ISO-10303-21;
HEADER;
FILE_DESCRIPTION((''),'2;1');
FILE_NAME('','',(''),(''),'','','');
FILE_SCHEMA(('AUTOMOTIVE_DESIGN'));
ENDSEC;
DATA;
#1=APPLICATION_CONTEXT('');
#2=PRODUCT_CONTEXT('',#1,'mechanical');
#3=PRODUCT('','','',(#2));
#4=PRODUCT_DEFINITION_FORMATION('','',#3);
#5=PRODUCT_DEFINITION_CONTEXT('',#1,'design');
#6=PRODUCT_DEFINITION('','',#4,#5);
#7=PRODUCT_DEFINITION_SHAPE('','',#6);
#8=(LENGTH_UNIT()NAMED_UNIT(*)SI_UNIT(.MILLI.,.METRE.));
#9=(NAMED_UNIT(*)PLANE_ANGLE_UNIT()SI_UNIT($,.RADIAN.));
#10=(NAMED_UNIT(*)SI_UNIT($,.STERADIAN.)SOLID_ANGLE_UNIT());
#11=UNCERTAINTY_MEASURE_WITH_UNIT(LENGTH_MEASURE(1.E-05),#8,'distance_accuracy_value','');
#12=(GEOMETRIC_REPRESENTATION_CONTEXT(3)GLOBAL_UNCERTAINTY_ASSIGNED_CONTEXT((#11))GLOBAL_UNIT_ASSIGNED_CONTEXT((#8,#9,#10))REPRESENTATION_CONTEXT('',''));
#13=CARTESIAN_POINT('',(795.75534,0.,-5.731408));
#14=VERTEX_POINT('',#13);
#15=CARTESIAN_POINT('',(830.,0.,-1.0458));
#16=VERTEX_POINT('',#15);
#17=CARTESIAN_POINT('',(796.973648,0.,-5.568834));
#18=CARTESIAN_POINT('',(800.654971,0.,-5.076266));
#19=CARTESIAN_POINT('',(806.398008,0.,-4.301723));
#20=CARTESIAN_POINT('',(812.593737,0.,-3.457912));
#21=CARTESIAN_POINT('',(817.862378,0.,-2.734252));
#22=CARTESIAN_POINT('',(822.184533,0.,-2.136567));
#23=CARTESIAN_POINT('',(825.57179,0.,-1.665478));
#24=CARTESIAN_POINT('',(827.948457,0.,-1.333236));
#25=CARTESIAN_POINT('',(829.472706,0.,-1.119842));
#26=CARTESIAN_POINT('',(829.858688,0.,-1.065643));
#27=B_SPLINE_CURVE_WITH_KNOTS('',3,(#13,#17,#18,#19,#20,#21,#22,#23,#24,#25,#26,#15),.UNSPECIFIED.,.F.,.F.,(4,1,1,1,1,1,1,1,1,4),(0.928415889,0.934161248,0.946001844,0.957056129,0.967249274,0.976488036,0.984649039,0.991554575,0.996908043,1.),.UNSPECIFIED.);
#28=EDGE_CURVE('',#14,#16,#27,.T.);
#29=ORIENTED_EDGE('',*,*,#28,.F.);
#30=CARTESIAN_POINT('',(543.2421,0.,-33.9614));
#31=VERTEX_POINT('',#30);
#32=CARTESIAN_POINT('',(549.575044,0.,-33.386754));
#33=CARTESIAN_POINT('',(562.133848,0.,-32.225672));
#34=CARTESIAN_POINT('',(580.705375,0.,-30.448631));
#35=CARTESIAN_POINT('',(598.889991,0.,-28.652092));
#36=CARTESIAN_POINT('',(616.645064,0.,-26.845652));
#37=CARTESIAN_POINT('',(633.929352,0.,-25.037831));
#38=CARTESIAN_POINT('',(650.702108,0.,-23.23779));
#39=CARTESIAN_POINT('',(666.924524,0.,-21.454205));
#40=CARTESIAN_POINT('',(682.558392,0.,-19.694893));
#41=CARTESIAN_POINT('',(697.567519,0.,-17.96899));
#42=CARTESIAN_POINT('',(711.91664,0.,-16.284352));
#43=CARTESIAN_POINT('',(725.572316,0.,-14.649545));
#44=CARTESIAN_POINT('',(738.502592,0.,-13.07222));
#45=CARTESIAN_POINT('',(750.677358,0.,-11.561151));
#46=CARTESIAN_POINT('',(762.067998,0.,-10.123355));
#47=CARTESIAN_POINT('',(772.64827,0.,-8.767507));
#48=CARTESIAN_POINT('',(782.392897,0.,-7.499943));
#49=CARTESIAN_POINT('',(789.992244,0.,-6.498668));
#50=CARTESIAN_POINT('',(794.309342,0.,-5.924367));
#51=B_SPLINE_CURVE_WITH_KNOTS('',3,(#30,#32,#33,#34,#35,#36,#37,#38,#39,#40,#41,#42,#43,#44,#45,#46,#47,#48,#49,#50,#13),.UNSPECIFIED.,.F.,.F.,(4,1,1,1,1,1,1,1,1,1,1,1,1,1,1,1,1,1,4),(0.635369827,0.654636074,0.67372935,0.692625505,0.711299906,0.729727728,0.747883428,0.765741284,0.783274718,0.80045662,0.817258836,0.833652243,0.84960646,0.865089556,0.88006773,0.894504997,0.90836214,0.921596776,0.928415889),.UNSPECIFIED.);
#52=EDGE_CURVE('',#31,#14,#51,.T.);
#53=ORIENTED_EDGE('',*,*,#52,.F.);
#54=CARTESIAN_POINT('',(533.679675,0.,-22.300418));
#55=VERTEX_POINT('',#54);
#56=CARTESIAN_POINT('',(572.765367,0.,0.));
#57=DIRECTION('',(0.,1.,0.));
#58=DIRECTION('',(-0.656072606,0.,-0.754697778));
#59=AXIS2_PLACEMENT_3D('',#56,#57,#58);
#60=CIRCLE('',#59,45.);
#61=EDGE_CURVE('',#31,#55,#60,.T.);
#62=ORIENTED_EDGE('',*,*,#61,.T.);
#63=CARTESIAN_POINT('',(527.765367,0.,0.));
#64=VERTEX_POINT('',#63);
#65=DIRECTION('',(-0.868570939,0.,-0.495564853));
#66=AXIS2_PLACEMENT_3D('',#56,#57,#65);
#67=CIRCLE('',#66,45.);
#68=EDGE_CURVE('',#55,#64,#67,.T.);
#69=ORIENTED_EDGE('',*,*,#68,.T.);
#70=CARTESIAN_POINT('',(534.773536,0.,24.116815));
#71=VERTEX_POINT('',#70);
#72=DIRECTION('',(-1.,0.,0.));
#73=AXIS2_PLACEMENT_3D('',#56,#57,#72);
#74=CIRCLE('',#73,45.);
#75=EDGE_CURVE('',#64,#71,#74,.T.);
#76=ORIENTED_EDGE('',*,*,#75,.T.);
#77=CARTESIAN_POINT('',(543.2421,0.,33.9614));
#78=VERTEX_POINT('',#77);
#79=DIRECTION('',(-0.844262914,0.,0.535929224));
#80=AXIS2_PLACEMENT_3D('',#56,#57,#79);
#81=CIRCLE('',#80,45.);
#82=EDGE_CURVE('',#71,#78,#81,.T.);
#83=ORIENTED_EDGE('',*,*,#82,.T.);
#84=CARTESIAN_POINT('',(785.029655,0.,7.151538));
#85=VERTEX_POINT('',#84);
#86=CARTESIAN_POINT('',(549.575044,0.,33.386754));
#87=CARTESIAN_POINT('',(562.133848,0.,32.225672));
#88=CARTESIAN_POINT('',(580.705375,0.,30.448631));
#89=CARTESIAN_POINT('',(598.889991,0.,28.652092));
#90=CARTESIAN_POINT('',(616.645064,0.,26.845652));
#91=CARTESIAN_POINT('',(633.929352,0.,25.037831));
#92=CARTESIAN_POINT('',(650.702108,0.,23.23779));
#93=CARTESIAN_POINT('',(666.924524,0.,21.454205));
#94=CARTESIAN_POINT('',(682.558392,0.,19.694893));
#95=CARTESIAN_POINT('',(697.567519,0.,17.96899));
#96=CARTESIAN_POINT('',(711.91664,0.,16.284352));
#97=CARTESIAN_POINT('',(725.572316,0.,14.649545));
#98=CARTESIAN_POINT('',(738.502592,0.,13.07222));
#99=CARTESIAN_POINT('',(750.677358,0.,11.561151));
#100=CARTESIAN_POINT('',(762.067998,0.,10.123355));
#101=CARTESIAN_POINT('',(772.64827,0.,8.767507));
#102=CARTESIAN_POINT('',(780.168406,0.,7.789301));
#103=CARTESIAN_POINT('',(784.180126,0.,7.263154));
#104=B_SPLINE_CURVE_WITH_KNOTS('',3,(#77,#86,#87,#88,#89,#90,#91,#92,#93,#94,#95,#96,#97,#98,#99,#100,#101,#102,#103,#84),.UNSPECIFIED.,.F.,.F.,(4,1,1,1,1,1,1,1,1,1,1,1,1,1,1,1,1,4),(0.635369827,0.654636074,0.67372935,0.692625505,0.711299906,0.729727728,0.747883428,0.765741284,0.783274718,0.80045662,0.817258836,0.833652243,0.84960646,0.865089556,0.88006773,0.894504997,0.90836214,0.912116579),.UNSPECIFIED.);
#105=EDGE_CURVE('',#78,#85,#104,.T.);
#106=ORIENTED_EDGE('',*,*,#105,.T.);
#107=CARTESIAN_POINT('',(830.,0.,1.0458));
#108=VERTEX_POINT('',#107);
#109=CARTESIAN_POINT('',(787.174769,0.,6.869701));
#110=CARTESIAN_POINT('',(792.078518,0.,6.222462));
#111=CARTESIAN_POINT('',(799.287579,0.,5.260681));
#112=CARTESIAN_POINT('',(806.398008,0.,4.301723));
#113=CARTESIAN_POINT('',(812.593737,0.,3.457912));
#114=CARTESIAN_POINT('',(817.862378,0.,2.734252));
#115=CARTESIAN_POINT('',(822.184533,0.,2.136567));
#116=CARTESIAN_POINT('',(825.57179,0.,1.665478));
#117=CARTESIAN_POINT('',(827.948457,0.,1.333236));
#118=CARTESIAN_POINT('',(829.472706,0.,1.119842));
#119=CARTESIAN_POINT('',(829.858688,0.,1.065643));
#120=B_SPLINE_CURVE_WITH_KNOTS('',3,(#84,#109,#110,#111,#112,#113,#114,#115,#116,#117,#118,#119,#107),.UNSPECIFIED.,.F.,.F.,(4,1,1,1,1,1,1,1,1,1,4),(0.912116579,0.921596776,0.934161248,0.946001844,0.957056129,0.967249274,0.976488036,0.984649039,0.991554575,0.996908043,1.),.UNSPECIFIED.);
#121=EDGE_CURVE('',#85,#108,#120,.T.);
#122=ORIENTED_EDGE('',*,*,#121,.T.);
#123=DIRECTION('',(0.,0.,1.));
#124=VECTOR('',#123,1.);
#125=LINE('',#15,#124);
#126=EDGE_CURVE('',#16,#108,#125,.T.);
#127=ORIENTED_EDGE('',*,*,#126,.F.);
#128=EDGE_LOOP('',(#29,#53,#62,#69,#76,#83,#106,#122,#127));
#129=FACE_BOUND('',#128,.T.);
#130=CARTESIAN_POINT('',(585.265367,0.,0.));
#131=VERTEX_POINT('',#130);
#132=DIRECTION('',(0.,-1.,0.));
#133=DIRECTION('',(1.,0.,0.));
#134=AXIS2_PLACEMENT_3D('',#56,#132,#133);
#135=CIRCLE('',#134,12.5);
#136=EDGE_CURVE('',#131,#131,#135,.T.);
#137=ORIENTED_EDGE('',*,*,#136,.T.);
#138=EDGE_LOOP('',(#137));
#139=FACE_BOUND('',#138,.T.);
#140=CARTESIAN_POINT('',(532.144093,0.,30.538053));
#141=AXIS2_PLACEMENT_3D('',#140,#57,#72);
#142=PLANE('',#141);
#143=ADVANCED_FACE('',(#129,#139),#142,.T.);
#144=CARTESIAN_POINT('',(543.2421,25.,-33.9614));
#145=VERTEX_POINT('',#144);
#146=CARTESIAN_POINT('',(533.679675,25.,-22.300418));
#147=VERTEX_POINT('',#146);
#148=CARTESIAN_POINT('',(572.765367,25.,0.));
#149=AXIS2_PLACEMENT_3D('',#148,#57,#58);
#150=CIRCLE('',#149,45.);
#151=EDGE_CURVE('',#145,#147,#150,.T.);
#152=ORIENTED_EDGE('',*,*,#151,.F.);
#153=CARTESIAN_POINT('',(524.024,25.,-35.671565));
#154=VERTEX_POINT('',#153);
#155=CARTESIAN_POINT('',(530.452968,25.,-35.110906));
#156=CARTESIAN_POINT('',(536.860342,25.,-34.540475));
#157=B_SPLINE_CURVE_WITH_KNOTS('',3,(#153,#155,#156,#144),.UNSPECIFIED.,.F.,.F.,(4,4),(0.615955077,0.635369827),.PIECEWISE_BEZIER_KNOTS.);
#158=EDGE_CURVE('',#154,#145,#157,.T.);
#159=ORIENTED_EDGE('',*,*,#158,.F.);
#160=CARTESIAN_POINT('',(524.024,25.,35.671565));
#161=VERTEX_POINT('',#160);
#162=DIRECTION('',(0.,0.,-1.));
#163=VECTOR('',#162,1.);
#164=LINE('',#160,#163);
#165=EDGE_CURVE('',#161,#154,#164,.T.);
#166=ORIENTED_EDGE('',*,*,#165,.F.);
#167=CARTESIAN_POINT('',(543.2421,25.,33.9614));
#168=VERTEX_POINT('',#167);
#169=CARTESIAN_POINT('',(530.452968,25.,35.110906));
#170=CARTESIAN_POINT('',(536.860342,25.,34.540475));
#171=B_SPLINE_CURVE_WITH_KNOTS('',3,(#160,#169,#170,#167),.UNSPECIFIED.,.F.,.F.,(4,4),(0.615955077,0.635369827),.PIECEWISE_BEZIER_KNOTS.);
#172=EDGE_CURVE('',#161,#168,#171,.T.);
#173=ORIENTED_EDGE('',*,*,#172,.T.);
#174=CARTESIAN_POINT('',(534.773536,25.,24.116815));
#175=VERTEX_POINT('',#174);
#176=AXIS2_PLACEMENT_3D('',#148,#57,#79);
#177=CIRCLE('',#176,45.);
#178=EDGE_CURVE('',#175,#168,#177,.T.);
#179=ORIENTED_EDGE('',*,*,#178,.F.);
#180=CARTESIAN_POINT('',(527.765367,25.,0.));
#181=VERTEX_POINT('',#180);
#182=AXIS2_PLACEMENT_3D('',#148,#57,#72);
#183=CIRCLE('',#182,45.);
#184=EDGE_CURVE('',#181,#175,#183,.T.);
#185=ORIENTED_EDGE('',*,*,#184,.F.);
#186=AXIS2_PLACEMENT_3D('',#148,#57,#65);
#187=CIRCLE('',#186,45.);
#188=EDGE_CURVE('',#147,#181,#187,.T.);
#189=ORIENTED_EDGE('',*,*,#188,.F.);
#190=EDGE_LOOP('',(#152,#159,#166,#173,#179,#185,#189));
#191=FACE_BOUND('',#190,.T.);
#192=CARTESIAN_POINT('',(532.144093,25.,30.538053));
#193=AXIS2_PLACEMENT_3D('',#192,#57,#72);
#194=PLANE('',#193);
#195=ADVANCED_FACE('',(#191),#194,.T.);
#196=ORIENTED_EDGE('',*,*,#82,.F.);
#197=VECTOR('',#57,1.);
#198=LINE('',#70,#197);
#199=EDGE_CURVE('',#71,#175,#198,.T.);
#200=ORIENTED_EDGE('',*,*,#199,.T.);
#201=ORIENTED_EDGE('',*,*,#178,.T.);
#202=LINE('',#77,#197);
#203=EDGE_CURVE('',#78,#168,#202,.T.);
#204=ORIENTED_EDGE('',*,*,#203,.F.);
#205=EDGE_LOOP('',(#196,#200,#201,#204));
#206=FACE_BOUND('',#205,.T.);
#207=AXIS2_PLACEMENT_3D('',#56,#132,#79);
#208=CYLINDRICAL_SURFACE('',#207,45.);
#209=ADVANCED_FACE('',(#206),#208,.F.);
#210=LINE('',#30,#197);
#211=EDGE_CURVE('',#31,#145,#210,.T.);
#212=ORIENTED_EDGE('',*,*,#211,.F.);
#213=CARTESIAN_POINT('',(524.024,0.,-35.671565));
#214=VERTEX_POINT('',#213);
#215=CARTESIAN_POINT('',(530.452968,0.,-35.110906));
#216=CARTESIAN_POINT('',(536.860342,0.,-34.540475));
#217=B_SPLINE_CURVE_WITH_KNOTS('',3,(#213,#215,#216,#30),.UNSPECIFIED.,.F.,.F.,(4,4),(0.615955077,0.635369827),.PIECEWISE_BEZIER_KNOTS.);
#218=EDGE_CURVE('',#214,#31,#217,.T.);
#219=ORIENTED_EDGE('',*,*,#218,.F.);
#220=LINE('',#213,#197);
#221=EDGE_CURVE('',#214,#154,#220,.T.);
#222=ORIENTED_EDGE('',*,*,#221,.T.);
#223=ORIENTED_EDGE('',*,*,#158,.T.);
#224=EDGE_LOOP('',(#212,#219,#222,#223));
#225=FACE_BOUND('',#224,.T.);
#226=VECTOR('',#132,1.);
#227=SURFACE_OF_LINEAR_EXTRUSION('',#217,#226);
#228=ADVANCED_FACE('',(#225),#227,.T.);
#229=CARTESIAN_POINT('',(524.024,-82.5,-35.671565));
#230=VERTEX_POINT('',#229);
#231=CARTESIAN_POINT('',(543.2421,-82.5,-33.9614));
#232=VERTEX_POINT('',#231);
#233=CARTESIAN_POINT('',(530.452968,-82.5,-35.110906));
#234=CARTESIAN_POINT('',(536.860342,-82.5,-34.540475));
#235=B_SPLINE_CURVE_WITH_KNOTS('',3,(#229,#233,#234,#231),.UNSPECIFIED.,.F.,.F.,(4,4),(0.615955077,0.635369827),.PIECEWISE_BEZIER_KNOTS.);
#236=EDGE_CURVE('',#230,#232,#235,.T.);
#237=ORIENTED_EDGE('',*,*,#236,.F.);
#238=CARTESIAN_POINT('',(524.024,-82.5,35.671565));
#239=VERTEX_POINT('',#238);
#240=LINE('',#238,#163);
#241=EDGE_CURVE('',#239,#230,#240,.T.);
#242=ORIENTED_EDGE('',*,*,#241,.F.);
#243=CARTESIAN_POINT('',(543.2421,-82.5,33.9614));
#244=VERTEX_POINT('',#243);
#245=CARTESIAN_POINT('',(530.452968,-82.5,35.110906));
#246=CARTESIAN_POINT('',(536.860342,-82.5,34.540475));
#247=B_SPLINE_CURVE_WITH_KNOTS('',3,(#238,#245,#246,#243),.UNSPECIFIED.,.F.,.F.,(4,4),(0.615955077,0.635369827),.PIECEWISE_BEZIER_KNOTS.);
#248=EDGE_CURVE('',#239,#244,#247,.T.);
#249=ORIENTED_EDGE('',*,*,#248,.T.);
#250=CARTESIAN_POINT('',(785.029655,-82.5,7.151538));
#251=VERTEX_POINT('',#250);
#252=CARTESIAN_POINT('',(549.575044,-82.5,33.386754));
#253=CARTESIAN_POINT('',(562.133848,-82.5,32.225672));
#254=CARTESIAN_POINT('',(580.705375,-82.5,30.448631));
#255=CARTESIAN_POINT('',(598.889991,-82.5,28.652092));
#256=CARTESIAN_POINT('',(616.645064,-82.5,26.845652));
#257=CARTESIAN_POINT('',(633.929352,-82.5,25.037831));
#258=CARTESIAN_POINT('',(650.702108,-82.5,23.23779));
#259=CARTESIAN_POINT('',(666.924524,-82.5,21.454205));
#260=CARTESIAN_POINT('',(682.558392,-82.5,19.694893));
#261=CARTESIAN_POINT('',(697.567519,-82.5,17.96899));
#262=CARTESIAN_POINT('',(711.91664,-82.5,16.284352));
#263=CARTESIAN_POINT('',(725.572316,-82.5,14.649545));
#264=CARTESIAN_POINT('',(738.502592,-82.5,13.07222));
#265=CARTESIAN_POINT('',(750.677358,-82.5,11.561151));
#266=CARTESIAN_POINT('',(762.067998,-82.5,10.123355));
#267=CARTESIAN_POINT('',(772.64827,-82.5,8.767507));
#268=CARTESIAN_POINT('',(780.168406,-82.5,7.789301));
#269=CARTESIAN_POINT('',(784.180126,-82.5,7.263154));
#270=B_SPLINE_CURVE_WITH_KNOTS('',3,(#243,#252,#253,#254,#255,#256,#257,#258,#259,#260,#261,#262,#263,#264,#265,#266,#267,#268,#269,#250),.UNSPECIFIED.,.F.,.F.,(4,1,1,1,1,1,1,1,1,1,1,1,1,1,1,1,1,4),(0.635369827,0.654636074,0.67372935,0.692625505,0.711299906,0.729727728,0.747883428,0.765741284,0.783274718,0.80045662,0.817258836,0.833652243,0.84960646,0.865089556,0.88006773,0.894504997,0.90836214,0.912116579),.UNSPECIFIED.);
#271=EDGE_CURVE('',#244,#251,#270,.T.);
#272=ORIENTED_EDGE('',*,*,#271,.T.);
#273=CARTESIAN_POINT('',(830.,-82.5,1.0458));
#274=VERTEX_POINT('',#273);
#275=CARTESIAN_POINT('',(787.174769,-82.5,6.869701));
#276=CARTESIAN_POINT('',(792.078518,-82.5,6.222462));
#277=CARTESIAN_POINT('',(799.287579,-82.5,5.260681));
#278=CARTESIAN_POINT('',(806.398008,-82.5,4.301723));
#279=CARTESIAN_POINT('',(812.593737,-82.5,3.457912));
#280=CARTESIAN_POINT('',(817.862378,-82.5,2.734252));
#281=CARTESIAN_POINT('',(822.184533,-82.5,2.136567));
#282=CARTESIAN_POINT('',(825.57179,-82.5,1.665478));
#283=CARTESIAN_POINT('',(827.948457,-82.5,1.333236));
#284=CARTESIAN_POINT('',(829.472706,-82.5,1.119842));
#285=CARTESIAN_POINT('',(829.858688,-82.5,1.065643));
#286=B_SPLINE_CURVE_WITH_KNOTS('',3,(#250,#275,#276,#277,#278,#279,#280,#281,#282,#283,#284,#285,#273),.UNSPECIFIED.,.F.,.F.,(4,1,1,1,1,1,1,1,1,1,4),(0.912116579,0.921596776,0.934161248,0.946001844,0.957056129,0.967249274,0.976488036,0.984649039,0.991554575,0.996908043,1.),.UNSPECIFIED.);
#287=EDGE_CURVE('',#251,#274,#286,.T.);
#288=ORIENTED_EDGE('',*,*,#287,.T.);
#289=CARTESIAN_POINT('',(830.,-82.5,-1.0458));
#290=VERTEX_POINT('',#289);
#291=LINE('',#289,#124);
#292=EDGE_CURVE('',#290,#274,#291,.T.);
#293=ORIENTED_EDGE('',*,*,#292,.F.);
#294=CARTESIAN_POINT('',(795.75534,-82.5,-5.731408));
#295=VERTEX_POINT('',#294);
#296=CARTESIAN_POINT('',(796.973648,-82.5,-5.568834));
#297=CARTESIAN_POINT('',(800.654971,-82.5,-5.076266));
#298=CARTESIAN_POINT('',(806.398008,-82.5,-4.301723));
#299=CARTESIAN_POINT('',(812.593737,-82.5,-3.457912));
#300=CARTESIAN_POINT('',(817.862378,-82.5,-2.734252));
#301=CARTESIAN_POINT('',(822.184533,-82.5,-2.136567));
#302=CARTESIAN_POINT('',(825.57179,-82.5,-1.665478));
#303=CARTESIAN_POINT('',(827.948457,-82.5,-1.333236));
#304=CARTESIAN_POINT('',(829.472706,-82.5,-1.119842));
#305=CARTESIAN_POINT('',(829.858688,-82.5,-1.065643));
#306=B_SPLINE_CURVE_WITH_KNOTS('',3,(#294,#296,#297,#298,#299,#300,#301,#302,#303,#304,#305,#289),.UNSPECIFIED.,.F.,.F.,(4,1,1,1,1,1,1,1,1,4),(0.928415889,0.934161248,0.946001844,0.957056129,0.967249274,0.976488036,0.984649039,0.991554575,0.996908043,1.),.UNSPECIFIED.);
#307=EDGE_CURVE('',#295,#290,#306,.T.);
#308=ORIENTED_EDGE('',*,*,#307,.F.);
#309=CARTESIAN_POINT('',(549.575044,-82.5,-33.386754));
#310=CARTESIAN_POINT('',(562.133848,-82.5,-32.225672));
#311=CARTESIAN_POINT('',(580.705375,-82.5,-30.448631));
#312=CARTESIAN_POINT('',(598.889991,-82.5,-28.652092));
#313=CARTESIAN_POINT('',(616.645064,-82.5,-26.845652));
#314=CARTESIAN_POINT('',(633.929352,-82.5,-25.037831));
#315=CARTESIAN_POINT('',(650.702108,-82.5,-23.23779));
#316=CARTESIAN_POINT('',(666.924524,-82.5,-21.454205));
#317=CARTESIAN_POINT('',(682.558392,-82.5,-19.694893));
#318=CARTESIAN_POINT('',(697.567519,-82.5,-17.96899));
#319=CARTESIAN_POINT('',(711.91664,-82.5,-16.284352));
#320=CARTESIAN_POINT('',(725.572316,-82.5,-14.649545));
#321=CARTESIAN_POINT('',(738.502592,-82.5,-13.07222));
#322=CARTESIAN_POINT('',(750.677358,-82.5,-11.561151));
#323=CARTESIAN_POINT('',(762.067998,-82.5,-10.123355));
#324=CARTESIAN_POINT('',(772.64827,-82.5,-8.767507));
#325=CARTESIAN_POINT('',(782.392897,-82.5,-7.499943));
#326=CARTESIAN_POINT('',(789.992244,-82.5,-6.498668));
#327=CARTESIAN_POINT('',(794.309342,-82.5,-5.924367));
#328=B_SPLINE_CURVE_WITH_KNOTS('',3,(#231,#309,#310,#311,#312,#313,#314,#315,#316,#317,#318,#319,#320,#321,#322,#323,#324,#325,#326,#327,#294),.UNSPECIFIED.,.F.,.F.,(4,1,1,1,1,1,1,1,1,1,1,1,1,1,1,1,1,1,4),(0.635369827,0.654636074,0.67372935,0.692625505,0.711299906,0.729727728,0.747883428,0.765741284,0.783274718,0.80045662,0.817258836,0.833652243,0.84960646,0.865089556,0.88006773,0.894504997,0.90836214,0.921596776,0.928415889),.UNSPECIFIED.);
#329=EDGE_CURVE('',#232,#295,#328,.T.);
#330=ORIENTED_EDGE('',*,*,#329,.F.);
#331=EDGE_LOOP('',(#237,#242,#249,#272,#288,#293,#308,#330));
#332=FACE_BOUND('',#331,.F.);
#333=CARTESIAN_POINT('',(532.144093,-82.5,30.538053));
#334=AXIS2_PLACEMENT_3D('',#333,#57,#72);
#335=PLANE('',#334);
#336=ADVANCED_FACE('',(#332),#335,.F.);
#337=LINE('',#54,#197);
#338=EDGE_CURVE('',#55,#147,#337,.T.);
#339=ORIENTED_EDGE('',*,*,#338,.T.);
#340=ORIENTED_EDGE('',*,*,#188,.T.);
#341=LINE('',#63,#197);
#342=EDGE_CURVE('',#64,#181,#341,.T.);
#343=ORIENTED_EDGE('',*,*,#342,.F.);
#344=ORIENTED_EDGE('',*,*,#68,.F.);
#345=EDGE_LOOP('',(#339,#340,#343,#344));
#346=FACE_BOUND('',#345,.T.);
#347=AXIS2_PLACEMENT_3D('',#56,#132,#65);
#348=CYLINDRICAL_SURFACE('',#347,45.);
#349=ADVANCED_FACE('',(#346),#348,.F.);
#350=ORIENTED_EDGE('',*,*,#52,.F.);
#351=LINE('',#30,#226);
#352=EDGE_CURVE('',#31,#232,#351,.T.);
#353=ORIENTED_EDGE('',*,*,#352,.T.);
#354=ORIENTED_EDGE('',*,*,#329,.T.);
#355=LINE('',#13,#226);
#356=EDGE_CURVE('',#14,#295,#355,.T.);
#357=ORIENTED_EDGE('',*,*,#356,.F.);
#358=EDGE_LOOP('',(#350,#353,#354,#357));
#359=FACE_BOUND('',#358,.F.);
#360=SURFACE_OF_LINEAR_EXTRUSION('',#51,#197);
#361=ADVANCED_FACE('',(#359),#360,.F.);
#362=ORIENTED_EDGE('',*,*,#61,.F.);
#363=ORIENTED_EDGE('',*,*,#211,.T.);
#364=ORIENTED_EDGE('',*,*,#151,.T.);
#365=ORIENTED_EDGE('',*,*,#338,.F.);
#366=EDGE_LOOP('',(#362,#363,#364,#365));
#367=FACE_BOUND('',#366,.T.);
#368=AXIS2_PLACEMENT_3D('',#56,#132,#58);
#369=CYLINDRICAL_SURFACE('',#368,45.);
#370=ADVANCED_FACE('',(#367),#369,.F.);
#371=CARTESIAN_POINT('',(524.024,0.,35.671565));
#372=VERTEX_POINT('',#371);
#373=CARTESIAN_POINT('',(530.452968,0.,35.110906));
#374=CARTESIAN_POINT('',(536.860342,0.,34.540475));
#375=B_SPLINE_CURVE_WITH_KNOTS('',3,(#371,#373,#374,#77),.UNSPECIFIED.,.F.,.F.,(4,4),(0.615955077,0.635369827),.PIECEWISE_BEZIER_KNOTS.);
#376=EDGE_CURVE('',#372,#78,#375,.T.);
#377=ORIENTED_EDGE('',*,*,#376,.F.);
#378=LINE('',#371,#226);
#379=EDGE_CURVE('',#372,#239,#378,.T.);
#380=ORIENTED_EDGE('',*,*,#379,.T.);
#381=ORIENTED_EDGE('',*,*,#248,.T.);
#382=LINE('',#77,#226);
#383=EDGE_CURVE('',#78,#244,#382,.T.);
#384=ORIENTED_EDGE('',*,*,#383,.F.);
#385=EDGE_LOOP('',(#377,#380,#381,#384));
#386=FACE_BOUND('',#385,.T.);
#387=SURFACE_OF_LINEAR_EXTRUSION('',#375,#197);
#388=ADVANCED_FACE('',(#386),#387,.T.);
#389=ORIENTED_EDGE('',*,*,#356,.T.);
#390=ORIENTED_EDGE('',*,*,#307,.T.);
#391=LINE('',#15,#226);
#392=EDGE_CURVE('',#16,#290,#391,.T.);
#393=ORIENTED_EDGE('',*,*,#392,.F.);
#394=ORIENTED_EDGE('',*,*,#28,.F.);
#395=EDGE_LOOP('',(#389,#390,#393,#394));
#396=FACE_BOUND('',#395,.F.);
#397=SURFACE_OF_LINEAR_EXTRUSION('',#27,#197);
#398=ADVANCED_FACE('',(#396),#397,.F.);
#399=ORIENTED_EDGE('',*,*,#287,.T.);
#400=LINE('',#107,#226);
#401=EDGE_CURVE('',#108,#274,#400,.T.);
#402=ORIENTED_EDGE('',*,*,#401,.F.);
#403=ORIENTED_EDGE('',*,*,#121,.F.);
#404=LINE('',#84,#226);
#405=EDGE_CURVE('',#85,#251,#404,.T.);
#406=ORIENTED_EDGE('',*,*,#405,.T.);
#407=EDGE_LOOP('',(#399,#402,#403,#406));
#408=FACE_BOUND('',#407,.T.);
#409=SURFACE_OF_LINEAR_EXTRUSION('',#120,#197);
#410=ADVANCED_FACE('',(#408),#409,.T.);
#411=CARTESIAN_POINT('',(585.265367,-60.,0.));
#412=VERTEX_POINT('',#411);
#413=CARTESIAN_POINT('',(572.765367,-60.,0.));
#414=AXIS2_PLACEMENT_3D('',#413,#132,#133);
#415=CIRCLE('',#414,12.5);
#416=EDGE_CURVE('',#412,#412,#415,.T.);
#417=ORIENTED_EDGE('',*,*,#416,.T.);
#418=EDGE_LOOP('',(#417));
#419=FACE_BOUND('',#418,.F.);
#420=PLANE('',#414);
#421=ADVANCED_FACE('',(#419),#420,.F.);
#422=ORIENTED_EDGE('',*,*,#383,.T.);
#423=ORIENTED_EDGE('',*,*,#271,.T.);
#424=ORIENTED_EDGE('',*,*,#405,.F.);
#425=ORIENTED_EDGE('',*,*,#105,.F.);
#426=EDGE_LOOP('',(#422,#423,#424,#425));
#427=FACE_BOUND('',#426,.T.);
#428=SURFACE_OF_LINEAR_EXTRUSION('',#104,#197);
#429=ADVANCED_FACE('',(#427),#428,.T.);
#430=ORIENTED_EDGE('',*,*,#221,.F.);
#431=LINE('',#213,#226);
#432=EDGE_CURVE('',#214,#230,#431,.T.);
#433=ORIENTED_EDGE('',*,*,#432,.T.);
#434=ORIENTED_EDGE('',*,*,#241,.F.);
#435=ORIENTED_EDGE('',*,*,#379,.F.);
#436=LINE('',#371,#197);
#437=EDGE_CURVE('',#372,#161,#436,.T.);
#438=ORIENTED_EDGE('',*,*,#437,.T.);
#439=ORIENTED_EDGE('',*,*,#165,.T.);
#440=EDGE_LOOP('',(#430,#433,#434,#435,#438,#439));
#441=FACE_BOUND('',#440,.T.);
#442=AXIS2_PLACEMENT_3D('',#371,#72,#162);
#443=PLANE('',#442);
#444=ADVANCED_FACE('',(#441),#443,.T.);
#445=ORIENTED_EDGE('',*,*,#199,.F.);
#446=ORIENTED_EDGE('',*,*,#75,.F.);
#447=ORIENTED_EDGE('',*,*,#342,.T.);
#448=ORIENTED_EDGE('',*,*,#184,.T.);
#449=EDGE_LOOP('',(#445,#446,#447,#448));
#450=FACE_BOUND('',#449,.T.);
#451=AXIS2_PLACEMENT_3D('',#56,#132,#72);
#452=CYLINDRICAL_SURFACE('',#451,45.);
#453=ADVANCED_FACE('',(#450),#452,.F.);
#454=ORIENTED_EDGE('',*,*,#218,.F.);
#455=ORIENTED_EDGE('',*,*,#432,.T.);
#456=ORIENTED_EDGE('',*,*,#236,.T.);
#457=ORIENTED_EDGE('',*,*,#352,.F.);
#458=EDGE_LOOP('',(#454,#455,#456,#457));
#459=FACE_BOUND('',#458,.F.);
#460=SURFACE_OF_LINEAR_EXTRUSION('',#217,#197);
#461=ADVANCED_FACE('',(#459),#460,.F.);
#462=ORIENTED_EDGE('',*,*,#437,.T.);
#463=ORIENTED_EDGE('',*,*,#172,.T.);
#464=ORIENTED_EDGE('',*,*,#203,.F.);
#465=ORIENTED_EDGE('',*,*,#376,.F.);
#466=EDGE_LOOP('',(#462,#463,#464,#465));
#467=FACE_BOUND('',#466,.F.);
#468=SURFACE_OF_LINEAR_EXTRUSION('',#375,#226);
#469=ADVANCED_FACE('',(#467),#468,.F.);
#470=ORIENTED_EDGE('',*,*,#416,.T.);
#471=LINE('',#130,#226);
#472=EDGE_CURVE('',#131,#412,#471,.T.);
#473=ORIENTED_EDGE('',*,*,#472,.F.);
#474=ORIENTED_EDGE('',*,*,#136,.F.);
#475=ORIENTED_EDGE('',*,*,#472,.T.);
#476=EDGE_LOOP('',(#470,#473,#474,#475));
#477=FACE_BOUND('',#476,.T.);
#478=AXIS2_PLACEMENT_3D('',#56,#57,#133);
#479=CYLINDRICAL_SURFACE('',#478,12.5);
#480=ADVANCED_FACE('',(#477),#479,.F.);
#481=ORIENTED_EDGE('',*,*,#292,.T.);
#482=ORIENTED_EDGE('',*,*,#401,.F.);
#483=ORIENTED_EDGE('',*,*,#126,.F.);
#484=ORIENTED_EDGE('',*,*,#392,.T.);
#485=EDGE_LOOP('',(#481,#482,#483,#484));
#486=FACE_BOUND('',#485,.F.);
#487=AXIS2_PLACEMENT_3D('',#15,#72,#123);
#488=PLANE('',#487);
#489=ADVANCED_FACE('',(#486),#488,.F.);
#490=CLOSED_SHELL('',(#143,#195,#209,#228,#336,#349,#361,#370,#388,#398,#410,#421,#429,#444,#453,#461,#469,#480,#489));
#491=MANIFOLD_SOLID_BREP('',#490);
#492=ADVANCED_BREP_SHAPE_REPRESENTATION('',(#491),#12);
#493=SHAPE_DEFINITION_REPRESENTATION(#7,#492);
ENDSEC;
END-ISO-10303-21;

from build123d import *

# Parameters (mm, degrees)
F1_DEPTH = 82.5
F2_DEPTH = 25
F3_R     = 12.5
F4_DEPTH = 60


with BuildPart() as f1:
    # F0 (on Front) → F1 (new body)
    with BuildSketch(Plane.XZ):
        with BuildLine():
            add(Edge.make_bspline(
                [(524.024, 35.6715651167), (530.4529675183, 35.1109062879), (536.8603422789, 34.540475321), (543.2421, 33.9614)],
                knots=[0.6159550767, 0.6159550767, 0.6159550767, 0.6159550767, 0.635369827, 0.635369827, 0.635369827, 0.635369827], degree=3))
            Line((524.024, 35.6715651167), (524.024, 25.1107127602))
            add(Edge.make_bspline(
                [(524.024, 25.1107127602), (526.6770638269, 24.868020166), (530.2603237936, 24.5375720807), (533.8432643328, 24.2037227591), (534.7735361573, 24.1168150682)],
                knots=[513.3651484855, 513.3651484855, 513.3651484855, 513.3651484855, 521.3575419642, 524.1605032173, 524.1605032173, 524.1605032173, 524.1605032173], degree=3))
            ThreePointArc((534.7735361573, 24.1168150682), (538.650838246, 29.3461907199), (543.2421, 33.9614))
        make_face()
        with BuildLine():
            Line((524.024, -23.2286070743), (524.024, -35.6715651167))
            add(Edge.make_bspline(
                [(524.024, -35.6715651167), (530.4529675183, -35.1109062879), (536.8603422789, -34.540475321), (543.2421, -33.9614)],
                knots=[0.6159550767, 0.6159550767, 0.6159550767, 0.6159550767, 0.635369827, 0.635369827, 0.635369827, 0.635369827], degree=3))
            ThreePointArc((543.2421, -33.9614), (537.9689313182, -28.5343309954), (533.6796750092, -22.3004184004))
            add(Edge.make_bspline(
                [(524.024, -23.2286070743), (526.7063477836, -22.9731340758), (529.9249490386, -22.6641634275), (533.1432820941, -22.3524476401), (533.6796750092, -22.3004184004)],
                knots=[513.2741132252, 513.2741132252, 513.2741132252, 513.2741132252, 521.3575419641, 522.9742691651, 522.9742691651, 522.9742691651, 522.9742691651], degree=3))
        make_face()
        with BuildLine():
            add(Edge.make_bspline(
                [(524.024, 25.1107127602), (526.6770638269, 24.868020166), (530.2603237936, 24.5375720807), (533.8432643328, 24.2037227591), (534.7735361573, 24.1168150682)],
                knots=[513.3651484855, 513.3651484855, 513.3651484855, 513.3651484855, 521.3575419642, 524.1605032173, 524.1605032173, 524.1605032173, 524.1605032173], degree=3))
            Line((524.024, 25.1107127602), (524.024, 0))
            Line((524.024, 0), (527.7653672657, 0))
            ThreePointArc((527.7653672657, 0), (529.5529130431, 12.5572210326), (534.7735361573, 24.1168150682))
        make_face()
        with BuildLine():
            Line((524.024, 0), (524.024, -23.2286070743))
            add(Edge.make_bspline(
                [(524.024, -23.2286070743), (526.7063477836, -22.9731340758), (529.9249490386, -22.6641634275), (533.1432820941, -22.3524476401), (533.6796750092, -22.3004184004)],
                knots=[513.2741132252, 513.2741132252, 513.2741132252, 513.2741132252, 521.3575419641, 522.9742691651, 522.9742691651, 522.9742691651, 522.9742691651], degree=3))
            ThreePointArc((533.6796750092, -22.3004184004), (529.2690677016, -11.535680484), (527.7653672657, 0))
            Line((527.7653672657, 0), (524.024, 0))
        make_face()
        with BuildLine():
            add(Edge.make_bspline(
                [(543.2421, 33.9614), (549.5750436875, 33.3867540232), (562.1338476881, 32.225672374), (580.7053749717, 30.4486309004), (598.8899905971, 28.6520916952), (616.645063933, 26.8456524154), (633.9293517992, 25.0378311486), (650.7021084927, 23.2377895738), (666.924523511, 21.4542053534), (682.5583919944, 19.6948931431), (697.5675188661, 17.9689901739), (711.9166403588, 16.2843520174), (725.5723159977, 14.6495448382), (738.5025922877, 13.0722198932), (750.6773575973, 11.5611505206), (762.0679980169, 10.123355488), (772.6482697775, 8.767506964), (780.1684058461, 7.7893010713), (784.1801262556, 7.2631536294), (785.0296548206, 7.1515377434)],
                knots=[0.635369827, 0.635369827, 0.635369827, 0.635369827, 0.654636074, 0.6737293504, 0.6926255053, 0.7112999065, 0.7297277282, 0.747883428, 0.7657412837, 0.7832747177, 0.8004566202, 0.8172588362, 0.8336522425, 0.8496064603, 0.8650895564, 0.8800677295, 0.8945049966, 0.9083621399, 0.9121165786, 0.9121165786, 0.9121165786, 0.9121165786], degree=3))
            ThreePointArc((543.2421, 33.9614), (538.650838246, 29.3461907199), (534.7735361573, 24.1168150682))
            add(Edge.make_bspline(
                [(534.7735361573, 24.1168150682), (547.4888491387, 22.9289273345), (570.2810474133, 20.7234876988), (602.9514797769, 17.4132456465), (629.5721727855, 14.5753690345), (646.1150179567, 12.7470797563), (652.7777391491, 12)],
                knots=[524.1605032173, 524.1605032173, 524.1605032173, 524.1605032173, 562.4724553443, 592.8561025481, 622.6732889332, 642.7866986571, 642.7866986571, 642.7866986571, 642.7866986571], degree=3))
            Line((652.7777391491, 12), (665.973, 12))
            ThreePointArc((665.973, 12), (669.6925428199, 11.4089877382), (673.0457030707, 9.6941668684))
            add(Edge.make_bspline(
                [(673.0457030707, 9.6941668684), (678.6430527256, 9.0482316549), (693.2761814168, 7.3399638663), (715.1021603081, 4.7178028299), (732.4511827497, 2.5525104658), (740.7700852943, 1.4970109313), (741.8962423005, 1.3538186415)],
                knots=[663.1854009899, 663.1854009899, 663.1854009899, 663.1854009899, 680.0888797975, 707.3828314911, 729.1339381861, 732.5396092821, 732.5396092821, 732.5396092821, 732.5396092821], degree=3))
            add(Edge.make_bspline(
                [(741.8962423005, 1.3538186415), (746.2843670673, 1.9285048035), (754.6747553371, 3.0362373869), (766.9194584147, 4.6744667559), (776.9091256945, 6.0324501077), (782.8966080674, 6.8566568424), (785.0296548206, 7.1515377434)],
                knots=[732.5396092819, 732.5396092819, 732.5396092819, 732.5396092819, 745.8163943039, 757.9291810967, 769.6010098164, 776.0610078587, 776.0610078587, 776.0610078587, 776.0610078587], degree=3))
        make_face()
        with BuildLine():
            ThreePointArc((533.6796750092, -22.3004184004), (537.9689313182, -28.5343309954), (543.2421, -33.9614))
            add(Edge.make_bspline(
                [(543.2421, -33.9614), (549.5750436875, -33.3867540232), (562.1338476881, -32.225672374), (580.7053749717, -30.4486309004), (598.8899905971, -28.6520916952), (616.645063933, -26.8456524154), (633.9293517992, -25.0378311486), (650.7021084927, -23.2377895738), (666.924523511, -21.4542053534), (682.5583919944, -19.6948931431), (697.5675188661, -17.9689901739), (711.9166403588, -16.2843520174), (725.5723159977, -14.6495448382), (738.5025922877, -13.0722198932), (750.6773575973, -11.5611505206), (762.0679980169, -10.123355488), (772.6482697775, -8.767506964), (782.3928967751, -7.4999432572), (789.9922436278, -6.4986676858), (794.3093421293, -5.9243671687), (795.7553403022, -5.731408495)],
                knots=[0.635369827, 0.635369827, 0.635369827, 0.635369827, 0.654636074, 0.6737293504, 0.6926255053, 0.7112999065, 0.7297277282, 0.747883428, 0.7657412837, 0.7832747177, 0.8004566202, 0.8172588362, 0.8336522425, 0.8496064603, 0.8650895564, 0.8800677295, 0.8945049966, 0.9083621399, 0.921596776, 0.9284158886, 0.9284158886, 0.9284158886, 0.9284158886], degree=3))
            add(Edge.make_bspline(
                [(752.4752127939, 0), (753.3385987131, -0.1111737387), (758.2064040588, -0.7388852768), (766.9317355754, -1.8729638235), (778.4845581837, -3.3993366737), (788.0433504555, -4.682906586), (793.7449819172, -5.4572465403), (795.7553403022, -5.731408495)],
                knots=[743.2048524915, 743.2048524915, 743.2048524915, 743.2048524915, 745.816394304, 757.9291810969, 769.6010098166, 780.7760242539, 786.8629233002, 786.8629233002, 786.8629233002, 786.8629233002], degree=3))
            Line((752.4752127939, 0), (731.4902537549, 0))
            add(Edge.make_bspline(
                [(675.7749550869, -6.922548409), (680.4704196169, -6.3608211123), (694.1976504575, -4.7032327955), (712.7702276209, -2.4012449385), (726.6428498764, -0.6263462539), (731.4902537549, 0)],
                knots=[665.902054437, 665.902054437, 665.902054437, 665.902054437, 680.0888797974, 707.382831491, 722.0459285975, 722.0459285975, 722.0459285975, 722.0459285975], degree=3))
            ThreePointArc((675.7749550869, -6.922548409), (671.4924845363, -10.6552940107), (665.973, -12))
            Line((665.973, -12), (632.0462382215, -12))
            add(Edge.make_bspline(
                [(579.5327593007, -17.6845550908), (587.4225464727, -16.8640224682), (604.9318542045, -15.0134548613), (622.4325289508, -13.08262656), (632.0462382215, -12)],
                knots=[569.0591158558, 569.0591158558, 569.0591158558, 569.0591158558, 592.856102548, 621.8794937898, 621.8794937898, 621.8794937898, 621.8794937898], degree=3))
            add(Edge.make_bspline(
                [(569.024, -20), (574.601223494, -20), (579.5327593007, -17.6845550908)],
                knots=[4.7123889804, 4.7123889804, 4.7123889804, 5.1983473252, 5.1983473252, 5.1983473252], degree=2, weights=[1, 0.9706255083, 1]))
            add(Edge.make_bspline(
                [(563.3375761456, -19.3507371729), (566.1338768344, -20), (569.024, -20)],
                knots=[4.4568882152, 4.4568882152, 4.4568882152, 4.7123889804, 4.7123889804, 4.7123889804], degree=2, weights=[1, 0.9918510117, 1]))
            add(Edge.make_bspline(
                [(533.6796750092, -22.3004184004), (543.5680241797, -21.3412646258), (553.4538623678, -20.3564530629), (563.3375761456, -19.3507371729)],
                knots=[522.9742691651, 522.9742691651, 522.9742691651, 522.9742691651, 552.7784716909, 552.7784716909, 552.7784716909, 552.7784716909], degree=3))
        make_face()
        with BuildLine():
            add(Edge.make_bspline(
                [(534.7735361573, 24.1168150682), (547.4888491387, 22.9289273345), (570.2810474133, 20.7234876988), (602.9514797769, 17.4132456465), (629.5721727855, 14.5753690345), (646.1150179567, 12.7470797563), (652.7777391491, 12)],
                knots=[524.1605032173, 524.1605032173, 524.1605032173, 524.1605032173, 562.4724553443, 592.8561025481, 622.6732889332, 642.7866986571, 642.7866986571, 642.7866986571, 642.7866986571], degree=3))
            ThreePointArc((534.7735361573, 24.1168150682), (529.5529130431, 12.5572210326), (527.7653672657, 0))
            Line((527.7653672657, 0), (546.524, 0))
            add(Edge.make_bspline(
                [(591.524, 0), (591.524, 20), (569.024, 20), (546.524, 20), (546.524, 0)],
                knots=[0, 0, 0, 1.5707963268, 1.5707963268, 3.1415926536, 3.1415926536, 3.1415926536], degree=2, weights=[1, 0.7071067812, 1, 0.7071067812, 1]))
            Line((591.524, 0), (623.973, 0))
            Line((623.973, 0), (623.973, 10))
            ThreePointArc((623.973, 10), (624.5587864376, 11.4142135624), (625.973, 12))
            Line((625.973, 12), (652.7777391491, 12))
        make_face()
        with BuildLine():
            ThreePointArc((527.7653672657, 0), (529.2690677016, -11.535680484), (533.6796750092, -22.3004184004))
            add(Edge.make_bspline(
                [(533.6796750092, -22.3004184004), (543.5680241797, -21.3412646258), (553.4538623678, -20.3564530629), (563.3375761456, -19.3507371729)],
                knots=[522.9742691651, 522.9742691651, 522.9742691651, 522.9742691651, 552.7784716909, 552.7784716909, 552.7784716909, 552.7784716909], degree=3))
            add(Edge.make_bspline(
                [(546.524, 0), (546.524, -15.4468544374), (563.3375761456, -19.3507371729)],
                knots=[3.1415926536, 3.1415926536, 3.1415926536, 4.4568882152, 4.4568882152, 4.4568882152], degree=2, weights=[1, 0.7914322299, 1]))
            Line((546.524, 0), (527.7653672657, 0))
        make_face()
        with BuildLine():
            add(Edge.make_bspline(
                [(785.0296548206, 7.1515377434), (787.174768668, 6.8697005072), (792.0785180819, 6.2224623401), (799.2875794028, 5.2606805783), (806.398007937, 4.3017234095), (812.5937368846, 3.4579115596), (817.8623783077, 2.7342517017), (822.1845332462, 2.1365671069), (825.5717903187, 1.6654782983), (827.9484571682, 1.33323589), (829.4727060537, 1.1198422864), (829.8586880275, 1.0656429389), (830, 1.0458)],
                knots=[0.9121165786, 0.9121165786, 0.9121165786, 0.9121165786, 0.921596776, 0.9341612481, 0.9460018444, 0.9570561288, 0.9672492741, 0.9764880356, 0.9846490394, 0.9915545746, 0.9969080429, 1, 1, 1, 1], degree=3))
            add(Edge.make_bspline(
                [(741.8962423005, 1.3538186415), (746.2843670673, 1.9285048035), (754.6747553371, 3.0362373869), (766.9194584147, 4.6744667559), (776.9091256945, 6.0324501077), (782.8966080674, 6.8566568424), (785.0296548206, 7.1515377434)],
                knots=[732.5396092819, 732.5396092819, 732.5396092819, 732.5396092819, 745.8163943039, 757.9291810967, 769.6010098164, 776.0610078587, 776.0610078587, 776.0610078587, 776.0610078587], degree=3))
            add(Edge.make_bspline(
                [(741.8962423005, 1.3538186415), (745.4229300003, 0.9053958333), (748.9492417496, 0.4540210524), (752.4752127939, 0)],
                knots=[732.5396092821, 732.5396092821, 732.5396092821, 732.5396092821, 743.2048524915, 743.2048524915, 743.2048524915, 743.2048524915], degree=3))
            Line((752.4752127939, 0), (830, 0))
            Line((830, 0), (830, 1.0458))
        make_face()
        with BuildLine():
            add(Edge.make_bspline(
                [(752.4752127939, 0), (753.3385987131, -0.1111737387), (758.2064040588, -0.7388852768), (766.9317355754, -1.8729638235), (778.4845581837, -3.3993366737), (788.0433504555, -4.682906586), (793.7449819172, -5.4572465403), (795.7553403022, -5.731408495)],
                knots=[743.2048524915, 743.2048524915, 743.2048524915, 743.2048524915, 745.816394304, 757.9291810969, 769.6010098166, 780.7760242539, 786.8629233002, 786.8629233002, 786.8629233002, 786.8629233002], degree=3))
            add(Edge.make_bspline(
                [(795.7553403022, -5.731408495), (796.9736482838, -5.568833537), (800.6549707765, -5.0762655667), (806.398007937, -4.3017234095), (812.5937368846, -3.4579115596), (817.8623783077, -2.7342517017), (822.1845332462, -2.1365671069), (825.5717903187, -1.6654782983), (827.9484571682, -1.33323589), (829.4727060537, -1.1198422864), (829.8586880275, -1.0656429389), (830, -1.0458)],
                knots=[0.9284158886, 0.9284158886, 0.9284158886, 0.9284158886, 0.9341612481, 0.9460018444, 0.9570561288, 0.9672492741, 0.9764880356, 0.9846490394, 0.9915545746, 0.9969080429, 1, 1, 1, 1], degree=3))
            Line((830, -1.0458), (830, 0))
            Line((830, 0), (752.4752127939, 0))
        make_face()
        with BuildLine():
            Line((665.973, 12), (652.7777391491, 12))
            add(Edge.make_bspline(
                [(652.7777391491, 12), (655.762922623, 11.6652763822), (660.161514663, 11.1688961032), (664.5595773708, 10.6678568096), (665.973, 10.5063520034)],
                knots=[642.7866986571, 642.7866986571, 642.7866986571, 642.7866986571, 651.7983646979, 656.0662217526, 656.0662217526, 656.0662217526, 656.0662217526], degree=3))
            Line((665.973, 10.5063520034), (665.973, 12))
        make_face()
        with BuildLine():
            add(Edge.make_bspline(
                [(652.7777391491, 12), (655.762922623, 11.6652763822), (660.161514663, 11.1688961032), (664.5595773708, 10.6678568096), (665.973, 10.5063520034)],
                knots=[642.7866986571, 642.7866986571, 642.7866986571, 642.7866986571, 651.7983646979, 656.0662217526, 656.0662217526, 656.0662217526, 656.0662217526], degree=3))
            Line((652.7777391491, 12), (625.973, 12))
            ThreePointArc((625.973, 12), (624.5587864376, 11.4142135624), (623.973, 10))
            Line((623.973, 10), (623.973, 0))
            Line((623.973, 0), (665.973, 0))
            Line((665.973, 0), (665.973, 10.5063520034))
        make_face()
        with BuildLine():
            add(Edge.make_bspline(
                [(546.524, 0), (546.524, -15.4468544374), (563.3375761456, -19.3507371729)],
                knots=[3.1415926536, 3.1415926536, 3.1415926536, 4.4568882152, 4.4568882152, 4.4568882152], degree=2, weights=[1, 0.7914322299, 1]))
            add(Edge.make_bspline(
                [(563.3375761456, -19.3507371729), (566.5523093603, -19.0236224518), (571.9509432397, -18.4705327095), (577.3489807289, -17.911666611), (579.5327593007, -17.6845550908)],
                knots=[552.7784716909, 552.7784716909, 552.7784716909, 552.7784716909, 562.4724553442, 569.0591158558, 569.0591158558, 569.0591158558, 569.0591158558], degree=3))
            add(Edge.make_bspline(
                [(579.5327593007, -17.6845550908), (591.524, -12.0544515447), (591.524, 0)],
                knots=[5.1983473252, 5.1983473252, 5.1983473252, 6.2831853072, 6.2831853072, 6.2831853072], degree=2, weights=[1, 0.8564624828, 1]))
            Line((591.524, 0), (546.524, 0))
        make_face()
        with BuildLine():
            add(Edge.make_bspline(
                [(563.3375761456, -19.3507371729), (566.5523093603, -19.0236224518), (571.9509432397, -18.4705327095), (577.3489807289, -17.911666611), (579.5327593007, -17.6845550908)],
                knots=[552.7784716909, 552.7784716909, 552.7784716909, 552.7784716909, 562.4724553442, 569.0591158558, 569.0591158558, 569.0591158558, 569.0591158558], degree=3))
            add(Edge.make_bspline(
                [(563.3375761456, -19.3507371729), (566.1338768344, -20), (569.024, -20)],
                knots=[4.4568882152, 4.4568882152, 4.4568882152, 4.7123889804, 4.7123889804, 4.7123889804], degree=2, weights=[1, 0.9918510117, 1]))
            add(Edge.make_bspline(
                [(569.024, -20), (574.601223494, -20), (579.5327593007, -17.6845550908)],
                knots=[4.7123889804, 4.7123889804, 4.7123889804, 5.1983473252, 5.1983473252, 5.1983473252], degree=2, weights=[1, 0.9706255083, 1]))
        make_face()
        with BuildLine():
            add(Edge.make_bspline(
                [(731.4902537549, 0), (733.8334453003, 0.3027701597), (737.3022307159, 0.7531116765), (740.7706302145, 1.2064040341), (741.8962423005, 1.3538186415)],
                knots=[722.0459285975, 722.0459285975, 722.0459285975, 722.0459285975, 729.1339381859, 732.5396092819, 732.5396092819, 732.5396092819, 732.5396092819], degree=3))
            add(Edge.make_bspline(
                [(673.0457030707, 9.6941668684), (678.6430527256, 9.0482316549), (693.2761814168, 7.3399638663), (715.1021603081, 4.7178028299), (732.4511827497, 2.5525104658), (740.7700852943, 1.4970109313), (741.8962423005, 1.3538186415)],
                knots=[663.1854009899, 663.1854009899, 663.1854009899, 663.1854009899, 680.0888797975, 707.3828314911, 729.1339381861, 732.5396092821, 732.5396092821, 732.5396092821, 732.5396092821], degree=3))
            ThreePointArc((673.0457030707, 9.6941668684), (676.6704865471, 5.4372586453), (677.973, 0))
            Line((677.973, 0), (731.4902537549, 0))
        make_face()
        with BuildLine():
            add(Edge.make_bspline(
                [(741.8962423005, 1.3538186415), (745.4229300003, 0.9053958333), (748.9492417496, 0.4540210524), (752.4752127939, 0)],
                knots=[732.5396092821, 732.5396092821, 732.5396092821, 732.5396092821, 743.2048524915, 743.2048524915, 743.2048524915, 743.2048524915], degree=3))
            add(Edge.make_bspline(
                [(731.4902537549, 0), (733.8334453003, 0.3027701597), (737.3022307159, 0.7531116765), (740.7706302145, 1.2064040341), (741.8962423005, 1.3538186415)],
                knots=[722.0459285975, 722.0459285975, 722.0459285975, 722.0459285975, 729.1339381859, 732.5396092819, 732.5396092819, 732.5396092819, 732.5396092819], degree=3))
            Line((731.4902537549, 0), (752.4752127939, 0))
        make_face()
        with BuildLine():
            add(Edge.make_bspline(
                [(591.524, 0), (591.524, 20), (569.024, 20), (546.524, 20), (546.524, 0)],
                knots=[0, 0, 0, 1.5707963268, 1.5707963268, 3.1415926536, 3.1415926536, 3.1415926536], degree=2, weights=[1, 0.7071067812, 1, 0.7071067812, 1]))
            Line((546.524, 0), (591.524, 0))
        make_face()
        with BuildLine():
            Line((665.973, 12), (665.973, 10.5063520034))
            add(Edge.make_bspline(
                [(665.973, 10.5063520034), (668.3307193205, 10.2369470894), (670.6882868311, 9.9662131504), (673.0457030707, 9.6941668684)],
                knots=[656.0662217526, 656.0662217526, 656.0662217526, 656.0662217526, 663.1854009899, 663.1854009899, 663.1854009899, 663.1854009899], degree=3))
            ThreePointArc((673.0457030707, 9.6941668684), (669.6925428199, 11.4089877382), (665.973, 12))
        make_face()
        with BuildLine():
            add(Edge.make_bspline(
                [(665.973, 10.5063520034), (668.3307193205, 10.2369470894), (670.6882868311, 9.9662131504), (673.0457030707, 9.6941668684)],
                knots=[656.0662217526, 656.0662217526, 656.0662217526, 656.0662217526, 663.1854009899, 663.1854009899, 663.1854009899, 663.1854009899], degree=3))
            Line((665.973, 10.5063520034), (665.973, 0))
            Line((665.973, 0), (677.973, 0))
            ThreePointArc((677.973, 0), (676.6704865471, 5.4372586453), (673.0457030707, 9.6941668684))
        make_face()
        with BuildLine():
            add(Edge.make_bspline(
                [(579.5327593007, -17.6845550908), (591.524, -12.0544515447), (591.524, 0)],
                knots=[5.1983473252, 5.1983473252, 5.1983473252, 6.2831853072, 6.2831853072, 6.2831853072], degree=2, weights=[1, 0.8564624828, 1]))
            add(Edge.make_bspline(
                [(579.5327593007, -17.6845550908), (587.4225464727, -16.8640224682), (604.9318542045, -15.0134548613), (622.4325289508, -13.08262656), (632.0462382215, -12)],
                knots=[569.0591158558, 569.0591158558, 569.0591158558, 569.0591158558, 592.856102548, 621.8794937898, 621.8794937898, 621.8794937898, 621.8794937898], degree=3))
            Line((632.0462382215, -12), (625.973, -12))
            ThreePointArc((625.973, -12), (624.5587864376, -11.4142135624), (623.973, -10))
            Line((623.973, -10), (623.973, 0))
            Line((623.973, 0), (591.524, 0))
        make_face()
        with BuildLine():
            add(Edge.make_bspline(
                [(675.7749550869, -6.922548409), (680.4704196169, -6.3608211123), (694.1976504575, -4.7032327955), (712.7702276209, -2.4012449385), (726.6428498764, -0.6263462539), (731.4902537549, 0)],
                knots=[665.902054437, 665.902054437, 665.902054437, 665.902054437, 680.0888797974, 707.382831491, 722.0459285975, 722.0459285975, 722.0459285975, 722.0459285975], degree=3))
            Line((731.4902537549, 0), (677.973, 0))
            ThreePointArc((677.973, 0), (677.4102955947, -3.6315657062), (675.7749550869, -6.922548409))
        make_face()
        with BuildLine():
            Line((665.973, -8.0874938306), (665.973, 0))
            Line((665.973, 0), (623.973, 0))
            Line((623.973, 0), (623.973, -10))
            ThreePointArc((623.973, -10), (624.5587864376, -11.4142135624), (625.973, -12))
            Line((625.973, -12), (632.0462382215, -12))
            add(Edge.make_bspline(
                [(632.0462382215, -12), (632.3091749564, -11.9703899624), (642.2194339984, -10.8537488755), (653.528780869, -9.5529086768), (664.5718113348, -8.2529185042), (665.973, -8.0874938306)],
                knots=[621.8794937898, 621.8794937898, 621.8794937898, 621.8794937898, 622.6732889331, 651.7983646977, 656.0311218622, 656.0311218622, 656.0311218622, 656.0311218622], degree=3))
        make_face()
        with BuildLine():
            Line((677.973, 0), (665.973, 0))
            Line((665.973, 0), (665.973, -8.0874938306))
            add(Edge.make_bspline(
                [(665.973, -8.0874938306), (669.2406192612, -7.7017179081), (672.5079370891, -7.3133879471), (675.7749550869, -6.922548409)],
                knots=[656.0311218622, 656.0311218622, 656.0311218622, 656.0311218622, 665.902054437, 665.902054437, 665.902054437, 665.902054437], degree=3))
            ThreePointArc((675.7749550869, -6.922548409), (677.4102955947, -3.6315657062), (677.973, 0))
        make_face()
        with BuildLine():
            add(Edge.make_bspline(
                [(632.0462382215, -12), (632.3091749564, -11.9703899624), (642.2194339984, -10.8537488755), (653.528780869, -9.5529086768), (664.5718113348, -8.2529185042), (665.973, -8.0874938306)],
                knots=[621.8794937898, 621.8794937898, 621.8794937898, 621.8794937898, 622.6732889331, 651.7983646977, 656.0311218622, 656.0311218622, 656.0311218622, 656.0311218622], degree=3))
            Line((632.0462382215, -12), (665.973, -12))
            Line((665.973, -12), (665.973, -8.0874938306))
        make_face()
        with BuildLine():
            ThreePointArc((665.973, -12), (671.4924845363, -10.6552940107), (675.7749550869, -6.922548409))
            add(Edge.make_bspline(
                [(665.973, -8.0874938306), (669.2406192612, -7.7017179081), (672.5079370891, -7.3133879471), (675.7749550869, -6.922548409)],
                knots=[656.0311218622, 656.0311218622, 656.0311218622, 656.0311218622, 665.902054437, 665.902054437, 665.902054437, 665.902054437], degree=3))
            Line((665.973, -8.0874938306), (665.973, -12))
        make_face()
    extrude(amount=F1_DEPTH)

    # F0 (on Front) → F2 (join)
    with BuildSketch(Plane.XZ):
        with BuildLine():
            add(Edge.make_bspline(
                [(524.024, 35.6715651167), (530.4529675183, 35.1109062879), (536.8603422789, 34.540475321), (543.2421, 33.9614)],
                knots=[0.6159550767, 0.6159550767, 0.6159550767, 0.6159550767, 0.635369827, 0.635369827, 0.635369827, 0.635369827], degree=3))
            Line((524.024, 35.6715651167), (524.024, 25.1107127602))
            add(Edge.make_bspline(
                [(524.024, 25.1107127602), (526.6770638269, 24.868020166), (530.2603237936, 24.5375720807), (533.8432643328, 24.2037227591), (534.7735361573, 24.1168150682)],
                knots=[513.3651484855, 513.3651484855, 513.3651484855, 513.3651484855, 521.3575419642, 524.1605032173, 524.1605032173, 524.1605032173, 524.1605032173], degree=3))
            ThreePointArc((534.7735361573, 24.1168150682), (538.650838246, 29.3461907199), (543.2421, 33.9614))
        make_face()
        with BuildLine():
            Line((524.024, -23.2286070743), (524.024, -35.6715651167))
            add(Edge.make_bspline(
                [(524.024, -35.6715651167), (530.4529675183, -35.1109062879), (536.8603422789, -34.540475321), (543.2421, -33.9614)],
                knots=[0.6159550767, 0.6159550767, 0.6159550767, 0.6159550767, 0.635369827, 0.635369827, 0.635369827, 0.635369827], degree=3))
            ThreePointArc((543.2421, -33.9614), (537.9689313182, -28.5343309954), (533.6796750092, -22.3004184004))
            add(Edge.make_bspline(
                [(524.024, -23.2286070743), (526.7063477836, -22.9731340758), (529.9249490386, -22.6641634275), (533.1432820941, -22.3524476401), (533.6796750092, -22.3004184004)],
                knots=[513.2741132252, 513.2741132252, 513.2741132252, 513.2741132252, 521.3575419641, 522.9742691651, 522.9742691651, 522.9742691651, 522.9742691651], degree=3))
        make_face()
        with BuildLine():
            add(Edge.make_bspline(
                [(524.024, 25.1107127602), (526.6770638269, 24.868020166), (530.2603237936, 24.5375720807), (533.8432643328, 24.2037227591), (534.7735361573, 24.1168150682)],
                knots=[513.3651484855, 513.3651484855, 513.3651484855, 513.3651484855, 521.3575419642, 524.1605032173, 524.1605032173, 524.1605032173, 524.1605032173], degree=3))
            Line((524.024, 25.1107127602), (524.024, 0))
            Line((524.024, 0), (527.7653672657, 0))
            ThreePointArc((527.7653672657, 0), (529.5529130431, 12.5572210326), (534.7735361573, 24.1168150682))
        make_face()
        with BuildLine():
            Line((524.024, 0), (524.024, -23.2286070743))
            add(Edge.make_bspline(
                [(524.024, -23.2286070743), (526.7063477836, -22.9731340758), (529.9249490386, -22.6641634275), (533.1432820941, -22.3524476401), (533.6796750092, -22.3004184004)],
                knots=[513.2741132252, 513.2741132252, 513.2741132252, 513.2741132252, 521.3575419641, 522.9742691651, 522.9742691651, 522.9742691651, 522.9742691651], degree=3))
            ThreePointArc((533.6796750092, -22.3004184004), (529.2690677016, -11.535680484), (527.7653672657, 0))
            Line((527.7653672657, 0), (524.024, 0))
        make_face()
    extrude(amount=-F2_DEPTH)

    # F3 (on face) → F4 (cut)
    with BuildSketch(Plane.XZ):
        with Locations((572.7653672657, 0)):
            Circle(F3_R)
    extrude(amount=F4_DEPTH, mode=Mode.SUBTRACT)


solid = f1.part
